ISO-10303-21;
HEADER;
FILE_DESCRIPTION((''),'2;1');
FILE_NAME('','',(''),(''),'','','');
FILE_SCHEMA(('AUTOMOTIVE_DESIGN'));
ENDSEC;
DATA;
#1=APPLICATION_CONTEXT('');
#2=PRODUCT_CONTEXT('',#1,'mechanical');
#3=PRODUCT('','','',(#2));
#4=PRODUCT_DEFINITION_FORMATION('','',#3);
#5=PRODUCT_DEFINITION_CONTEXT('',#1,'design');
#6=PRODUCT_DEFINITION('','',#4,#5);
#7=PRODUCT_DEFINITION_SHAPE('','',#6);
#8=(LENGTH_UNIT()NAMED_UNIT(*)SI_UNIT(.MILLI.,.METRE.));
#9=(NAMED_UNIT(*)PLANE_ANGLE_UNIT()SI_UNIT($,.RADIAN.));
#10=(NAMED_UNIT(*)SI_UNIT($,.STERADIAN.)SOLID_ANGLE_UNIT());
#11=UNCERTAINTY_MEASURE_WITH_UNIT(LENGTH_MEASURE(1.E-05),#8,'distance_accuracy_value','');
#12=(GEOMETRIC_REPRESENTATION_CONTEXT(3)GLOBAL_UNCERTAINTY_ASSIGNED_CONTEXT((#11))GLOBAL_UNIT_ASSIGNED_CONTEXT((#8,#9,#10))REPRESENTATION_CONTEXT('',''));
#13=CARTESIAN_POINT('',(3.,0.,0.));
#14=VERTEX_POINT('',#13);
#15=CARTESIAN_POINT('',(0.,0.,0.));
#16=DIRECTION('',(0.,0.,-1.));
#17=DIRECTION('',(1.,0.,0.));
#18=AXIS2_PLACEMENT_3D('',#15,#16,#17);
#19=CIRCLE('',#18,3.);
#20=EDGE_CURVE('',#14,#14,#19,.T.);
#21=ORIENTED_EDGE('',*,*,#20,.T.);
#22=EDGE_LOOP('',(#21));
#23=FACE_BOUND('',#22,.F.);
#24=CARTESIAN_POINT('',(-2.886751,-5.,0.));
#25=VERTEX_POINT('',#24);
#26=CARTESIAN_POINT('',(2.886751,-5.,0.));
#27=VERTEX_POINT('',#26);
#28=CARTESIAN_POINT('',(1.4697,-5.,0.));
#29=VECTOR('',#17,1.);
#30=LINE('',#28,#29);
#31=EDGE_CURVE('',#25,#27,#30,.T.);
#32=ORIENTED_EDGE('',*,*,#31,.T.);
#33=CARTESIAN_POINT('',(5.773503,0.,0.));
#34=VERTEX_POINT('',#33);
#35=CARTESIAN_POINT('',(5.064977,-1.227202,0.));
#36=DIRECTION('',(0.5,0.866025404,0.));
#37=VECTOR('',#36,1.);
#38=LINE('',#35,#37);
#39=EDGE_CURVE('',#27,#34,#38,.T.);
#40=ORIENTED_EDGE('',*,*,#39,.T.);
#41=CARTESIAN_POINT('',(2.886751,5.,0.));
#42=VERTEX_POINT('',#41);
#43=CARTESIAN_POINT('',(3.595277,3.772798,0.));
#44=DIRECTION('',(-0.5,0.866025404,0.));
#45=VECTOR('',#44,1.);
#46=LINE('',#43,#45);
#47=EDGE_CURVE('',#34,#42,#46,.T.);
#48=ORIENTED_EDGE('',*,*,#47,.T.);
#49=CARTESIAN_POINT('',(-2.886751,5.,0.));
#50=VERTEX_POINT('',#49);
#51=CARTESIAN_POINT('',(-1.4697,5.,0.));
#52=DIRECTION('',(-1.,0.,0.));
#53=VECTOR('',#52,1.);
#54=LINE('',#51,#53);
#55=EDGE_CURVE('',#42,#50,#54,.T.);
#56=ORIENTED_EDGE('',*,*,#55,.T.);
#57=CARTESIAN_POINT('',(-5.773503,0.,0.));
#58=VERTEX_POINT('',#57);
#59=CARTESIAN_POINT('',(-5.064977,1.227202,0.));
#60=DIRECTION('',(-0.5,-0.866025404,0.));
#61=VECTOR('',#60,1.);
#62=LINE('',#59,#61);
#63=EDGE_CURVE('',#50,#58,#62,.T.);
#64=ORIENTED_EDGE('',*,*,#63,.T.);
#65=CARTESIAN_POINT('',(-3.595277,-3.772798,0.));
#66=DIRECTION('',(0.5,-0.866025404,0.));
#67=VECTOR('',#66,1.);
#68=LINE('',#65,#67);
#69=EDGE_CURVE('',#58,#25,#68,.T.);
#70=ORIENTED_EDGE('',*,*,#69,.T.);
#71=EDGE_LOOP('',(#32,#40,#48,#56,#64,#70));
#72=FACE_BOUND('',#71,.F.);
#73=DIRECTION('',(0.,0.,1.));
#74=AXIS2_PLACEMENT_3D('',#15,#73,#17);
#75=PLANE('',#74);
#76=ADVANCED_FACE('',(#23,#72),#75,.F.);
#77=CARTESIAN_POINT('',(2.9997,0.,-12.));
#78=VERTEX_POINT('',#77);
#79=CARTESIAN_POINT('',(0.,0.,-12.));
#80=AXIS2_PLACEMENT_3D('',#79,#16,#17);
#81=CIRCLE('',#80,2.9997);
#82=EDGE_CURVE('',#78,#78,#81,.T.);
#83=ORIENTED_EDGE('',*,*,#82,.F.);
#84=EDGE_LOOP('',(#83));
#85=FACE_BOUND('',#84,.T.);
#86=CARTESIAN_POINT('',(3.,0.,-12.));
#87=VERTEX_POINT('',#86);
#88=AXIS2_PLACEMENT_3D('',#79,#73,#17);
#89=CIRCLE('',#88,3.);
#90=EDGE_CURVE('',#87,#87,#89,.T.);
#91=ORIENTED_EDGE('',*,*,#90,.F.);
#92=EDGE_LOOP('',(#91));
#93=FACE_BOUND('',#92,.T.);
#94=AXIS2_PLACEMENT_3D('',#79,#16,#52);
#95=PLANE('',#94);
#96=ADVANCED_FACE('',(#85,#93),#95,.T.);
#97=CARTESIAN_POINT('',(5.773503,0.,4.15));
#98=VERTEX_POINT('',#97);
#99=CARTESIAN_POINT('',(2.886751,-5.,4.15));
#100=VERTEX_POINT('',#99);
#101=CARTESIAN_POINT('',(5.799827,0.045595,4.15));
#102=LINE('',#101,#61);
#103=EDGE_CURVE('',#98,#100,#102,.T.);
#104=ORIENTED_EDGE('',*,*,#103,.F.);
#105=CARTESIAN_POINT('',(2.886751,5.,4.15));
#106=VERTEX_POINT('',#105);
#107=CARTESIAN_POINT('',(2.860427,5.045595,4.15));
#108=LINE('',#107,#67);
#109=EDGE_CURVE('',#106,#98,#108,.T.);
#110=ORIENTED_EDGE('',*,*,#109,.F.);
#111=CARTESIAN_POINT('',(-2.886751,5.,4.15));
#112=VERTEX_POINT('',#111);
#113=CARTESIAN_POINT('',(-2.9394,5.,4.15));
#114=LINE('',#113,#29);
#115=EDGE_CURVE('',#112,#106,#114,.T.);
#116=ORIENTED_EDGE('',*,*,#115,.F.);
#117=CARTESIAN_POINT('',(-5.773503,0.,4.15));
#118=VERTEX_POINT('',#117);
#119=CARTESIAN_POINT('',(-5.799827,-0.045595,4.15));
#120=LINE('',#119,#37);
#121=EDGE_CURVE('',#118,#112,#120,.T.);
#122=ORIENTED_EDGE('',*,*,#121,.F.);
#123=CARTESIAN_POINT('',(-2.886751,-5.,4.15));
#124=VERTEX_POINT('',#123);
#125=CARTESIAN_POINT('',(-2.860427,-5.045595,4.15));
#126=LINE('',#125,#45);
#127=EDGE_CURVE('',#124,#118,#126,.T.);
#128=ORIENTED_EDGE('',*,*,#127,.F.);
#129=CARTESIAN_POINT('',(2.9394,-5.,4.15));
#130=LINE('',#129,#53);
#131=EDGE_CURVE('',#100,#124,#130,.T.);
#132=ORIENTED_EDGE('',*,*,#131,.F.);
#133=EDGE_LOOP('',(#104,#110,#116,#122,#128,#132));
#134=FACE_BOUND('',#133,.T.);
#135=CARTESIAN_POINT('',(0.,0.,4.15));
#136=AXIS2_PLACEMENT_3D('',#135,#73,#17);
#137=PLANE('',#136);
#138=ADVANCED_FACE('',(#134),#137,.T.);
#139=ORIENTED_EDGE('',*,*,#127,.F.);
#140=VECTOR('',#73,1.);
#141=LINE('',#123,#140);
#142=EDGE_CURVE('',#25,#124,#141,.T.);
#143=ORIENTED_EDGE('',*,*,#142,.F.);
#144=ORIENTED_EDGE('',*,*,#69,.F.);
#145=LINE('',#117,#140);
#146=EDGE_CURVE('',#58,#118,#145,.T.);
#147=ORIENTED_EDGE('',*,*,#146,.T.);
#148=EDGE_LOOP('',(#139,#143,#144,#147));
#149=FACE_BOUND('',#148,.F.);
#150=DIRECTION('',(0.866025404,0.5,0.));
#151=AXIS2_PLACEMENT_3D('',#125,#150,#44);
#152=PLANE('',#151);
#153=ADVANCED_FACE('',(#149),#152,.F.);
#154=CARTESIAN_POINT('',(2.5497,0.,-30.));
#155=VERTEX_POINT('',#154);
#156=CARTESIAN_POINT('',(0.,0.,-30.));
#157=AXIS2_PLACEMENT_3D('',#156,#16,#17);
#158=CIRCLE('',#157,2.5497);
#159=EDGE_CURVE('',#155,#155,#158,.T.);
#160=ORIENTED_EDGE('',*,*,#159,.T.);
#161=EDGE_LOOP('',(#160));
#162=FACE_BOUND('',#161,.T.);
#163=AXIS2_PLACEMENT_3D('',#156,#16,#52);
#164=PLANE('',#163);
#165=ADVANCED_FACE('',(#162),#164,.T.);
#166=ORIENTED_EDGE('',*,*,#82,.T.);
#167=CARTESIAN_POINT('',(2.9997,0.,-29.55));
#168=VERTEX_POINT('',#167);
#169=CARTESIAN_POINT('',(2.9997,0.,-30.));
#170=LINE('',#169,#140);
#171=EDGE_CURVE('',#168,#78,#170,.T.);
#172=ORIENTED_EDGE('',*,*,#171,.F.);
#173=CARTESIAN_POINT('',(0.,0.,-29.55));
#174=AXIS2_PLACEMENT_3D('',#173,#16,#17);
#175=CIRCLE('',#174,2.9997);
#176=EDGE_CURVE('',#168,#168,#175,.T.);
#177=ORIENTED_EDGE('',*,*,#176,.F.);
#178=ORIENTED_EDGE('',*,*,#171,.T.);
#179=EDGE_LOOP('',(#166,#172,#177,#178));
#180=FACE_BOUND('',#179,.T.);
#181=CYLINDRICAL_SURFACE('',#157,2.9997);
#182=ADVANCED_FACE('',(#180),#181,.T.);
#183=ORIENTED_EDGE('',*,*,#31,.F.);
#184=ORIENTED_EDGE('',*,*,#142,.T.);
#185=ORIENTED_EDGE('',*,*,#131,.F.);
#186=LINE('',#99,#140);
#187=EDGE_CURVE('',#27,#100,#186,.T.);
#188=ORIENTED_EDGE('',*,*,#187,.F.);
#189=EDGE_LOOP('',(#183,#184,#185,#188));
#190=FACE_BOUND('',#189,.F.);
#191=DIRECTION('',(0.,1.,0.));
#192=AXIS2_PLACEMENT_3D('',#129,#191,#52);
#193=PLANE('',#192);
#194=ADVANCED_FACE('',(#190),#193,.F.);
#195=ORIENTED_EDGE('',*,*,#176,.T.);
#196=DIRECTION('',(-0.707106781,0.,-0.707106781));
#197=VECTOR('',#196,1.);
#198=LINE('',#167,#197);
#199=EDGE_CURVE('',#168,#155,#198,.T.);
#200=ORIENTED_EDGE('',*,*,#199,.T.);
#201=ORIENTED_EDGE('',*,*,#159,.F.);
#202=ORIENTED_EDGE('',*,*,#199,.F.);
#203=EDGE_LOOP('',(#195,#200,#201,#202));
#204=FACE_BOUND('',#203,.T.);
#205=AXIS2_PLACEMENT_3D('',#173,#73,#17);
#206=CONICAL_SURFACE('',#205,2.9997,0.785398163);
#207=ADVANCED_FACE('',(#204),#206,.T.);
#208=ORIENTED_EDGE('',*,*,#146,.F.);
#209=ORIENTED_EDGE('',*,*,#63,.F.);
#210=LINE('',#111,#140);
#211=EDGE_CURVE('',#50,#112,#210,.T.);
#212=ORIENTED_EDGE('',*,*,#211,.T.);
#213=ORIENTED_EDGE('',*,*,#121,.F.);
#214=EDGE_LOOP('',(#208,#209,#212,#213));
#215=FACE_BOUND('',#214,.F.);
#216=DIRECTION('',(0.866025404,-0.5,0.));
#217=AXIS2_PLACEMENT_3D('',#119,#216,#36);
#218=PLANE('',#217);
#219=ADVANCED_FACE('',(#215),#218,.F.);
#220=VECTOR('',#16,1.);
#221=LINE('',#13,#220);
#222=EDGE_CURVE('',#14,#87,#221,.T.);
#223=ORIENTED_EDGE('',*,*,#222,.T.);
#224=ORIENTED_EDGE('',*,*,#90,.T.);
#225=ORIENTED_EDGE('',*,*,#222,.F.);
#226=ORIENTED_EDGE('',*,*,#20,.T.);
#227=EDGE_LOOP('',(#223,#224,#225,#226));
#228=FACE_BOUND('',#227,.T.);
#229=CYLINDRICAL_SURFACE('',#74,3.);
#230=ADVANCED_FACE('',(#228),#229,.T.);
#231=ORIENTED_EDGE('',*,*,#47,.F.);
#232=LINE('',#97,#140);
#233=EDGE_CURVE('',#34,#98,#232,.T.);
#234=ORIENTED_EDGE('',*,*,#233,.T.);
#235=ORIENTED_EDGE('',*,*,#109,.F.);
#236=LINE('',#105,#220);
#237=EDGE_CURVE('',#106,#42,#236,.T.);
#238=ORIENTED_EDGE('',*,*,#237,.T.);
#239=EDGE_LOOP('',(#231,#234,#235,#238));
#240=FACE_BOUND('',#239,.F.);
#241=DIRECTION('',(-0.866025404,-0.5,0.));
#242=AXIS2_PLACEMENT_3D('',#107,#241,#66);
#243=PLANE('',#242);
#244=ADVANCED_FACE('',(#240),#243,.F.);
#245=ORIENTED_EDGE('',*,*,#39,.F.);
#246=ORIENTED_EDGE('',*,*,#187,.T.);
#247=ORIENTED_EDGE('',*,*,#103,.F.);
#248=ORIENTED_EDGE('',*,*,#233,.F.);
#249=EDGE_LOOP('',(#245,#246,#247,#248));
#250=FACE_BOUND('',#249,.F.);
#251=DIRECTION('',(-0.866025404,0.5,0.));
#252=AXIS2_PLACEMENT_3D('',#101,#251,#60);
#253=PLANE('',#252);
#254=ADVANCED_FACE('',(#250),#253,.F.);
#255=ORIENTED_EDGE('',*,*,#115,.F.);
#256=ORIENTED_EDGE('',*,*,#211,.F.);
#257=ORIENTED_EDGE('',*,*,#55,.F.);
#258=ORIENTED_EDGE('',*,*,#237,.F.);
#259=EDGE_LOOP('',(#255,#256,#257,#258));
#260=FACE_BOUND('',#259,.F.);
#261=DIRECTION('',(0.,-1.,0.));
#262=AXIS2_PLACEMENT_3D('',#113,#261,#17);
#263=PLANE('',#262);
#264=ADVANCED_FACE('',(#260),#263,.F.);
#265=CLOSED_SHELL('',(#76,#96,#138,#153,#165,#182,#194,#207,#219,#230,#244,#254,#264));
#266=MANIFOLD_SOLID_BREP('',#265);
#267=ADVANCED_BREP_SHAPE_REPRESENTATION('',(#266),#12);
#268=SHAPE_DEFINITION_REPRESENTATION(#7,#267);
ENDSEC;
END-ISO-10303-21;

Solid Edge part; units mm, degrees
sketch "Sketch1" plane through (0, 0, 0) normal (0, 0, 1) x (1, 0, 0)
  circle A0 centre (0, 0) radius 5.8
  dimension "D1" = 11.6
extrude "Protrusion1" add sketch "Sketch1" along normal blind 4.15
sketch "Sketch2" plane through (0, 0, 0) normal (0, 0, -1) x (1, 0, 0)
  circle A0 centre (0, 0) radius 3
extrude "Protrusion2" add sketch "Sketch2" along normal blind 30
sketch "Sketch3" plane through (0, 0, -30) normal (0, 0, -1) x (1, 0, 0)
  circle A0 centre (0, 0) radius 2.9997
extrude "Cutout1" cut sketch "Sketch3" against normal blind 18 flip side to cut
chamfer "Chamfer_1" distance 0.45 angle 45 1 edges at (-2.9997, 0, -30)
sketch "Sketch4" plane through (0, 0, 4.15) normal (0, 0, 1) x (1, 0, 0)
  line L0 (-2.9394, 5) -> (2.9394, 5)
  dimension "D1" = 10
extrude "Cutout2" cut sketch "Sketch4" against normal up to next material side at (0, 5.05, 4.15)
pattern_circular "Pattern1" count 6 over 360 about axis through (0, 0, 4.15) along (0, 0, 1) of "Cutout2"
properties part number "24104923"
